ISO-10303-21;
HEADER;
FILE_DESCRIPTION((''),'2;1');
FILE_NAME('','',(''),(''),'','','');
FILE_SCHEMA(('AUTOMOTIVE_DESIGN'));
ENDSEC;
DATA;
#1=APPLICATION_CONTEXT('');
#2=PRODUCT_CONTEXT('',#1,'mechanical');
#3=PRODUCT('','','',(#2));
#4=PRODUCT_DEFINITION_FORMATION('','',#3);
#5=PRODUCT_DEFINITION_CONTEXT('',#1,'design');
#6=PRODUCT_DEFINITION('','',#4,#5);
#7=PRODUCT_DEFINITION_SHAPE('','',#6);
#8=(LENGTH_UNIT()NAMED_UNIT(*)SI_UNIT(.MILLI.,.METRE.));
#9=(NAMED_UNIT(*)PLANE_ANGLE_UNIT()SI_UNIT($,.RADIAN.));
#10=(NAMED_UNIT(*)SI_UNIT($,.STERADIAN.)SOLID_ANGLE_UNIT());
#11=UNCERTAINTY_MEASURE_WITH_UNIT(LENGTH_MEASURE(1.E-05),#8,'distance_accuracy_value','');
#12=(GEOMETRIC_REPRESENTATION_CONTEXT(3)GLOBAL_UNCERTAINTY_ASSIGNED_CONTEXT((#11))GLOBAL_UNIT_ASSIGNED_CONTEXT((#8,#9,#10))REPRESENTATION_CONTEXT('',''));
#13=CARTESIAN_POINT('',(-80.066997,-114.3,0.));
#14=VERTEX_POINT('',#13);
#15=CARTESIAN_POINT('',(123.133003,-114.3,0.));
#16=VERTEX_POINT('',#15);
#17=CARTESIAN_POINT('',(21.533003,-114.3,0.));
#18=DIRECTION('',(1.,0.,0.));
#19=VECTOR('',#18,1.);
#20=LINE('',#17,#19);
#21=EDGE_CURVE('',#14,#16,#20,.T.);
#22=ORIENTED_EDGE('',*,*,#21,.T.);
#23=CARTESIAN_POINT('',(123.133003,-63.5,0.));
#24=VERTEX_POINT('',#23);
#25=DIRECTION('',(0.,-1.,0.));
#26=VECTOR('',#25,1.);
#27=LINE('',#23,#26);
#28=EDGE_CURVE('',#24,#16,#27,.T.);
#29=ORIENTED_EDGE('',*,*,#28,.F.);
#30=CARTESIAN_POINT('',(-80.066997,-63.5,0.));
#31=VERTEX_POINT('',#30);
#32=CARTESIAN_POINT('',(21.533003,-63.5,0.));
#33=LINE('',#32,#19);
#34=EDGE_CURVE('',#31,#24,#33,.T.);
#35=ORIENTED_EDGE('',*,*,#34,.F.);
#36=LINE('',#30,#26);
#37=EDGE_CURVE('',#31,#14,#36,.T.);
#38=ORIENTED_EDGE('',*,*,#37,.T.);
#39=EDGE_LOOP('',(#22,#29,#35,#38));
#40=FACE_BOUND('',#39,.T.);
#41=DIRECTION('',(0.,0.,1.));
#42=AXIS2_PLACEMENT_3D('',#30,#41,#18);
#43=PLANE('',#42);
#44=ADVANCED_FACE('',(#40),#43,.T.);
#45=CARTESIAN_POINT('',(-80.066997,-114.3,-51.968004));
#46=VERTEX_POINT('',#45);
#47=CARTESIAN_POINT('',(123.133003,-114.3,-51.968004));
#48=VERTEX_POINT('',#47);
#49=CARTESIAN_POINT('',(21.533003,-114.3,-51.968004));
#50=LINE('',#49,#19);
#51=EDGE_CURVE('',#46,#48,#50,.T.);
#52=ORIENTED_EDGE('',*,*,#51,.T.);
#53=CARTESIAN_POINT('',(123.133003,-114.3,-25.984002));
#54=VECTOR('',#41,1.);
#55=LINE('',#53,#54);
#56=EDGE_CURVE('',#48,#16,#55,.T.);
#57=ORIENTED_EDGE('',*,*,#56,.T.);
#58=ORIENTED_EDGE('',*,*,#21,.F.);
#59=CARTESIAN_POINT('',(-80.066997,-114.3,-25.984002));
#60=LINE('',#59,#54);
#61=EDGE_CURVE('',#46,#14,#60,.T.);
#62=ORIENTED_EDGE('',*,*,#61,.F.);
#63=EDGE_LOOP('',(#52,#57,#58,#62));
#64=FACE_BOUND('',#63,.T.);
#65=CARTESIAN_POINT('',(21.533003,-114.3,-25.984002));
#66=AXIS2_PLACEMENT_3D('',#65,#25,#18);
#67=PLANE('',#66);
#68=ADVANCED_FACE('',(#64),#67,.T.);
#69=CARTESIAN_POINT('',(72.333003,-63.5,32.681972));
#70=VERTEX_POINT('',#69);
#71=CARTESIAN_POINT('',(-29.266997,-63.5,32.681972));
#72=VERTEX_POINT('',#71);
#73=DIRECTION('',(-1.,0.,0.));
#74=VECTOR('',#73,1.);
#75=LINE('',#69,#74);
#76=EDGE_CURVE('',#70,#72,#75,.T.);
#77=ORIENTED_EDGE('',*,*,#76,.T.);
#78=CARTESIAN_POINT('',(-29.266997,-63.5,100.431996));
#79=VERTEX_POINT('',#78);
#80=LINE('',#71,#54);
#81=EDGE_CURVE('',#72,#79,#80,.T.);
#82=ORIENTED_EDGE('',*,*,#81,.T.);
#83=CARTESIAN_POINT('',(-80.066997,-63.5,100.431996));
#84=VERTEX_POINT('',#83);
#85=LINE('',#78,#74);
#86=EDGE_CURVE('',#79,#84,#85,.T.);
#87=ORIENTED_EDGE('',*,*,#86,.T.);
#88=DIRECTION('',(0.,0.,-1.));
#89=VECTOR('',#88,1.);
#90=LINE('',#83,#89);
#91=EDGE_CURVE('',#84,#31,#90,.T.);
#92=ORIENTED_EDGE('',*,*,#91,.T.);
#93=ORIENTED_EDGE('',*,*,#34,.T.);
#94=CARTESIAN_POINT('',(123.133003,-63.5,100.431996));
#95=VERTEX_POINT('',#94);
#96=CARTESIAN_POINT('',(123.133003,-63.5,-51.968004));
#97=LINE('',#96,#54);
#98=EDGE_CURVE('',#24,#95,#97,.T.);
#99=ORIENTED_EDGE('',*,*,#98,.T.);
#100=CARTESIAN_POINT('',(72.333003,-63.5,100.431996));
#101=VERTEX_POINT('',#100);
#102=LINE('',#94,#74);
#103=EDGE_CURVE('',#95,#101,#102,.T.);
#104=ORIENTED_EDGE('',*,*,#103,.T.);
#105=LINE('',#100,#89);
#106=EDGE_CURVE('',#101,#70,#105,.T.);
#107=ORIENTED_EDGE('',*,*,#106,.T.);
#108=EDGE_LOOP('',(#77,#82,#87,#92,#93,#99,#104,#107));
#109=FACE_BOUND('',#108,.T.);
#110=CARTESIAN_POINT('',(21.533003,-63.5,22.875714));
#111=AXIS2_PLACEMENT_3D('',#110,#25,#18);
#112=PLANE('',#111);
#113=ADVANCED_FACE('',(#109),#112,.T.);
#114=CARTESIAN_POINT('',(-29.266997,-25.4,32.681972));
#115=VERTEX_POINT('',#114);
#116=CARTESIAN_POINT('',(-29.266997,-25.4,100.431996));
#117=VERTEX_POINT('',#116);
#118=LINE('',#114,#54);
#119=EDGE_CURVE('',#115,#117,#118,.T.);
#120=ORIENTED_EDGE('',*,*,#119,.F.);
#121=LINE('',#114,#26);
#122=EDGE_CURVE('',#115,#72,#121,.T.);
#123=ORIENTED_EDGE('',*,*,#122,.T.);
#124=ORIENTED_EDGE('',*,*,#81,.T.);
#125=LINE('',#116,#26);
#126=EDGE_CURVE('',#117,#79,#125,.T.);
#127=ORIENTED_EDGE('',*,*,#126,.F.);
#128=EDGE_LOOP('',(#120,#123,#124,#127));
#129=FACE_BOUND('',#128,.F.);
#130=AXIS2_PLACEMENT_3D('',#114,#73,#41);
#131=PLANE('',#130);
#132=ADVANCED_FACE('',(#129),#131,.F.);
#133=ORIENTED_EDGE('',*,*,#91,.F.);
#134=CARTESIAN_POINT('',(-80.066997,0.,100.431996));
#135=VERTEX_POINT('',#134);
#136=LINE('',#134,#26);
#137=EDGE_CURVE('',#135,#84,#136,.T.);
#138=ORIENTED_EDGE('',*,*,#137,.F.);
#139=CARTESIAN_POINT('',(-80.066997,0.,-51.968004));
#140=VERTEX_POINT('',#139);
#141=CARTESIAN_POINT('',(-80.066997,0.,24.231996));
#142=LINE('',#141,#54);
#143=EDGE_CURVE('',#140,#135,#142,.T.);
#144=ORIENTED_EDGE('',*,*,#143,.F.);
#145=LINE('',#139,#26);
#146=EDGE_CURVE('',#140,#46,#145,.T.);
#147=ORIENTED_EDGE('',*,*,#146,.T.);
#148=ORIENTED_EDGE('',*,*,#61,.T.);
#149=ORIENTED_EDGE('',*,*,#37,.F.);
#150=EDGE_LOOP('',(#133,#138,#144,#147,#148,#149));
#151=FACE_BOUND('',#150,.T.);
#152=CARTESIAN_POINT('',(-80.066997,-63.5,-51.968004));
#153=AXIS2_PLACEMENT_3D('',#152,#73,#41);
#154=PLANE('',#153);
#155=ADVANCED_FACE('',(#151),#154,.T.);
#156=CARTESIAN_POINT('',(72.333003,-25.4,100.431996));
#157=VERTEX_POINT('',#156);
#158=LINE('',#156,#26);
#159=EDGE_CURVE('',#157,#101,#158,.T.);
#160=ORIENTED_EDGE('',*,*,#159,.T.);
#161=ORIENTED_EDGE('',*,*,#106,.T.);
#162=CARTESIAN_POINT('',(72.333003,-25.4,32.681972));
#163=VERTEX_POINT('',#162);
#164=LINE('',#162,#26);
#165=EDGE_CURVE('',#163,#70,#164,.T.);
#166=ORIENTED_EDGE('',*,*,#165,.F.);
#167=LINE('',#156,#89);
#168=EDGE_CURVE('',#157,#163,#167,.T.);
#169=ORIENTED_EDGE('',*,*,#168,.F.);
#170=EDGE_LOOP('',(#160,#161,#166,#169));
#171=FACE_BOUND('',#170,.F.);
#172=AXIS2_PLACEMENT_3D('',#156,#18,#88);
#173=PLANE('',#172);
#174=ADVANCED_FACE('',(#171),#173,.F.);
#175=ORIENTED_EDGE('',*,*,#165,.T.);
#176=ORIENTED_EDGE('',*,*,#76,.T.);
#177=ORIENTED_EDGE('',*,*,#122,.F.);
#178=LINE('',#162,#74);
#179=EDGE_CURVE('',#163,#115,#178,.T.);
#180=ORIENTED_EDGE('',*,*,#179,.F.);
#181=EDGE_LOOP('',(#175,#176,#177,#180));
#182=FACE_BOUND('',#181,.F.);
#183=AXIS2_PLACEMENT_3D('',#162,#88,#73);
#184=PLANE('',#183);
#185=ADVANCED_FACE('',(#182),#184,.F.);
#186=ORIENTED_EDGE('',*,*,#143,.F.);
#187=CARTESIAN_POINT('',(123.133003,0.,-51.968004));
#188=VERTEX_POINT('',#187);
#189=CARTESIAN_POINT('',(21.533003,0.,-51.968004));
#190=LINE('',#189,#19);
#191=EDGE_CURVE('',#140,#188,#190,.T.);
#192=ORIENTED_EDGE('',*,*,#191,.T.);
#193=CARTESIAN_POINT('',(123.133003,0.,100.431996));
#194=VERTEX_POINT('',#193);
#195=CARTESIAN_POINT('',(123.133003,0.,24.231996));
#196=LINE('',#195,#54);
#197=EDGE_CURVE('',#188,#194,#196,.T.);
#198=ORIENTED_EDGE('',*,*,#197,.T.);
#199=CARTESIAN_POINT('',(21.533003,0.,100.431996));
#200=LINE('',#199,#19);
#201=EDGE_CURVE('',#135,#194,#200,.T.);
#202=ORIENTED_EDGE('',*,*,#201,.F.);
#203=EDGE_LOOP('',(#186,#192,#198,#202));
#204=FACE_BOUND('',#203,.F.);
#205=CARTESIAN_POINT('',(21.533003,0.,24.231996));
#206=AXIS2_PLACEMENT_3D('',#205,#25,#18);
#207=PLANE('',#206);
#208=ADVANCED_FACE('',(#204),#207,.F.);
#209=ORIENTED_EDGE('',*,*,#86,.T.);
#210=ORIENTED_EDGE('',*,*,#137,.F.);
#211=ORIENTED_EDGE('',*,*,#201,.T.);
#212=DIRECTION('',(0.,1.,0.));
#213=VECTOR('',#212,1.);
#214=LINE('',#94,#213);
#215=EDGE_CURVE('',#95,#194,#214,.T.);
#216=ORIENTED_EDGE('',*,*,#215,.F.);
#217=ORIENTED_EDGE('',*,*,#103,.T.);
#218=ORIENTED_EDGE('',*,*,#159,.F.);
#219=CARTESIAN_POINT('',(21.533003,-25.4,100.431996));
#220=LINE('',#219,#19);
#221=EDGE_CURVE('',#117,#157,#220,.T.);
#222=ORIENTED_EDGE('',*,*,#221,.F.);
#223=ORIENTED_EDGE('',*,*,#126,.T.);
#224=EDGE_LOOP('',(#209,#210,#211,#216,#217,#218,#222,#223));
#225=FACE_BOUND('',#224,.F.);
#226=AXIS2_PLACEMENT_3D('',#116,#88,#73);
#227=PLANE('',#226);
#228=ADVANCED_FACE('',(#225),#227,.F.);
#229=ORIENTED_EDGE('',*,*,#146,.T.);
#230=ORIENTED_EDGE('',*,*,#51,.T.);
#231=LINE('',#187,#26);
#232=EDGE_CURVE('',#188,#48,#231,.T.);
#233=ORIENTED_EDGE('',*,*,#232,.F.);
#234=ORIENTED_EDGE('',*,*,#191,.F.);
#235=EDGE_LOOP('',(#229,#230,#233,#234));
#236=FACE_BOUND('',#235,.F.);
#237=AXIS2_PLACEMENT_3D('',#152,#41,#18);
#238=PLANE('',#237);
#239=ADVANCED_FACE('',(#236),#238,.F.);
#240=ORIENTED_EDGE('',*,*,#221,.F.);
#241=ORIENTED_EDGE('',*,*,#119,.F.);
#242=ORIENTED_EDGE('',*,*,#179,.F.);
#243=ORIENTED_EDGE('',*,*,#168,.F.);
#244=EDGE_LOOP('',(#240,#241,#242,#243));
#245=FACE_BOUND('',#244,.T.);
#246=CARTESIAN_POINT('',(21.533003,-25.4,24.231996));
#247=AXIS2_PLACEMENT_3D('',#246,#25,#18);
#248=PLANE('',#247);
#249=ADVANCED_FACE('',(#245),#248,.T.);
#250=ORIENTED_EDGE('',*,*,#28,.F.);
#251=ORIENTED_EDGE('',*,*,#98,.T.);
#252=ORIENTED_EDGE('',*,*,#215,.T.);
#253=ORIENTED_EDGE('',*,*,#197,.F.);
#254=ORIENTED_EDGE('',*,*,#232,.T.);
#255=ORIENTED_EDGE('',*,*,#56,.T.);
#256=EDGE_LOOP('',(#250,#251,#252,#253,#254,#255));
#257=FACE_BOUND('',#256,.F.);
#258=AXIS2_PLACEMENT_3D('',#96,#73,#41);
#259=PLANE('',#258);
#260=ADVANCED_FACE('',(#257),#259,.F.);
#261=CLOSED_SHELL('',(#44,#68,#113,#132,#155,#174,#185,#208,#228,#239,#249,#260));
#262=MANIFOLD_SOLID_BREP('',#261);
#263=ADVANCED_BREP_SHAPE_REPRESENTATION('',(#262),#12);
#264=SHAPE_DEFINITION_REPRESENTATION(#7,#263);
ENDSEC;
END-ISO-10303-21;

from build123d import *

# Parameters (mm, degrees)
F0_W     = 203.2
F0_H     = 152.4
F1_DEPTH = 25.4
F3_DEPTH = 38.1
F4_W     = 203.2
F4_H     = 51.9680035462
F5_DEPTH = 50.8


# Not quite as in the source:
# - a feature names something its author has since deleted; it is built from what else it names


with BuildPart() as f1:
    # F0 (on Front) → F1 (new body)
    with BuildSketch(Plane.XZ):
        with Locations((21.5330033839, 24.2319964538)):
            Rectangle(F0_W, F0_H)
    extrude(amount=F1_DEPTH)

    # F2 (on face) → F3 (join)
    with BuildSketch(Plane.XZ.offset(25.4)):
        Polygon((-29.2669966161, 32.6819717884), (-29.2669966161, 100.4319964538), (-80.0669966161, 100.4319964538), (-80.0669966161, -51.9680035462), (123.1330033839, -51.9680035462), (123.1330033839, 100.4319964538), (72.3330033839, 100.4319964538), (72.3330033839, 32.6819717884), align=None)
    extrude(amount=F3_DEPTH)

    # F4 (on face) → F5 (join)
    with BuildSketch(Plane.XZ.offset(63.5)):
        with Locations((21.5330033839, -25.9840017731)):
            Rectangle(F4_W, F4_H)
    extrude(amount=F5_DEPTH)


solid = f1.part
